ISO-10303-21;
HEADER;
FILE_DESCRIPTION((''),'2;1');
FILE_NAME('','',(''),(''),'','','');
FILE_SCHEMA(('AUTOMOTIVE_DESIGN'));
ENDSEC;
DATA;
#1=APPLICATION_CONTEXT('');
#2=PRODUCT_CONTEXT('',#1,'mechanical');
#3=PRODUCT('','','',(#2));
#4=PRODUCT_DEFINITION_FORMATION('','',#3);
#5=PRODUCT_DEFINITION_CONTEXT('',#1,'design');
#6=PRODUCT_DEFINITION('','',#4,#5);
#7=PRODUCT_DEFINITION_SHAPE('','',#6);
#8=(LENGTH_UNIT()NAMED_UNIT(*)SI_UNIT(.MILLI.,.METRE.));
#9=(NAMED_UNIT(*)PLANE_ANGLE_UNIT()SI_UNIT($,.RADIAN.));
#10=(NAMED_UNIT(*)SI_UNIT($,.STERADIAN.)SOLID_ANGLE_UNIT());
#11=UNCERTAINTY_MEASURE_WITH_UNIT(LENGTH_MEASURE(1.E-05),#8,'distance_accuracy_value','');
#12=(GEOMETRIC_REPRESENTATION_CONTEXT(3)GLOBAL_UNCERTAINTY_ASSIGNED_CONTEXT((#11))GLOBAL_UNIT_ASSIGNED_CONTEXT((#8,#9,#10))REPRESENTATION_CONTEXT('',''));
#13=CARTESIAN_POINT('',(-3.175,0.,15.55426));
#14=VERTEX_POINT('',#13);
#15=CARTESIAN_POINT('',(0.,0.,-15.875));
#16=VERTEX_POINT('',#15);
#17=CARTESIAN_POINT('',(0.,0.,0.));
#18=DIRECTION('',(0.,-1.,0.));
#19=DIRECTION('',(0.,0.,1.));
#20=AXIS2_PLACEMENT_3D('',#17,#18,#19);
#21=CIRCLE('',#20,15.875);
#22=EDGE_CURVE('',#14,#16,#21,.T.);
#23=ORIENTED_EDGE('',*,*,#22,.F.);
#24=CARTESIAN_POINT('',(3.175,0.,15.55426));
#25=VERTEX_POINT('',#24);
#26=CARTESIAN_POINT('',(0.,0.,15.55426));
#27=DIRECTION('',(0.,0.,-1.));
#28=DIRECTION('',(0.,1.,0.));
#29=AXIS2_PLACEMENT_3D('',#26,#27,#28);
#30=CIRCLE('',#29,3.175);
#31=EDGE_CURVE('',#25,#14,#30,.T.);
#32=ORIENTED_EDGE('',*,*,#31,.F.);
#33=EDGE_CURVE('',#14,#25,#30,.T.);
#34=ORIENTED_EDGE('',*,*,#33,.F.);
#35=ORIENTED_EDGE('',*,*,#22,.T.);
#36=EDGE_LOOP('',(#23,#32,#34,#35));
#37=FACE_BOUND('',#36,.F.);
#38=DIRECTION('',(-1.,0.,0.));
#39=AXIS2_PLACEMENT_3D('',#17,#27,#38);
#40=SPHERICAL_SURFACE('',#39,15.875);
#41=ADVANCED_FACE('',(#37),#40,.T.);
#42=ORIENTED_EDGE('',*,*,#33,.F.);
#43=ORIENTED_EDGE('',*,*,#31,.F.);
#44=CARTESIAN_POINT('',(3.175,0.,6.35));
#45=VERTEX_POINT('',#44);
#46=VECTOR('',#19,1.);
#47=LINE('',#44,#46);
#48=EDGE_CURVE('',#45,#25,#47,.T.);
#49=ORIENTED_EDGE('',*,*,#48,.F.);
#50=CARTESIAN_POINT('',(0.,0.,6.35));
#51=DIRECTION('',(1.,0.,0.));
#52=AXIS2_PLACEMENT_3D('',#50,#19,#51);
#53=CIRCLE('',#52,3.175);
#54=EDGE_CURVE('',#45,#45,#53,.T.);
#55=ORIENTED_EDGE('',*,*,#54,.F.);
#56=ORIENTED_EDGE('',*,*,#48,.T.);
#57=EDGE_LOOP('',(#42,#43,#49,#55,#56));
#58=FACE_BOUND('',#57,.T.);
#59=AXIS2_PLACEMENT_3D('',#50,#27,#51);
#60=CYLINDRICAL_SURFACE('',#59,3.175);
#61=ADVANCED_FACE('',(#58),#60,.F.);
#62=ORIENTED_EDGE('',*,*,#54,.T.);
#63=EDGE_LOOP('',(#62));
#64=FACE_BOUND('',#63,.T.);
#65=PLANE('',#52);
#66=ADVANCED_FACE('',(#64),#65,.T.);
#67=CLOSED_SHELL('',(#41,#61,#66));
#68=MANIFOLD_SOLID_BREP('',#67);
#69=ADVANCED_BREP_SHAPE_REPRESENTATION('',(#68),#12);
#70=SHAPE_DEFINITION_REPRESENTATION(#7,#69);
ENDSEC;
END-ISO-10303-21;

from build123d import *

# Parameters (mm, degrees)
F4_R     = 3.175
F5_DEPTH = 50.8


# Not quite as in the source:
# - a length typed as a fraction of an inch, garbled in the dataset ("3 / 203.2 mm" for 3/8 in), is restored


with BuildPart() as f2:
    # F0 (on Front) → F2 (revolve)
    with BuildSketch(Plane.XZ):
        with BuildLine():
            Line((0, -15.875), (0, 15.875))
            ThreePointArc((0, 15.875), (-15.875, 0), (0, -15.875))
        make_face()
    revolve(axis=Axis((0, 0, 0), (0, 0, 1)))


with BuildPart() as f5:
    # F4 (on offset) → F5 (new body)
    with BuildSketch(Plane.XY.offset(6.35)):
        Circle(F4_R)
    extrude(amount=F5_DEPTH)


with BuildPart() as f2_1:
    add(f2.part)

    # F6: cut F5
    add(f5.part, mode=Mode.SUBTRACT)


solid = f2_1.part
